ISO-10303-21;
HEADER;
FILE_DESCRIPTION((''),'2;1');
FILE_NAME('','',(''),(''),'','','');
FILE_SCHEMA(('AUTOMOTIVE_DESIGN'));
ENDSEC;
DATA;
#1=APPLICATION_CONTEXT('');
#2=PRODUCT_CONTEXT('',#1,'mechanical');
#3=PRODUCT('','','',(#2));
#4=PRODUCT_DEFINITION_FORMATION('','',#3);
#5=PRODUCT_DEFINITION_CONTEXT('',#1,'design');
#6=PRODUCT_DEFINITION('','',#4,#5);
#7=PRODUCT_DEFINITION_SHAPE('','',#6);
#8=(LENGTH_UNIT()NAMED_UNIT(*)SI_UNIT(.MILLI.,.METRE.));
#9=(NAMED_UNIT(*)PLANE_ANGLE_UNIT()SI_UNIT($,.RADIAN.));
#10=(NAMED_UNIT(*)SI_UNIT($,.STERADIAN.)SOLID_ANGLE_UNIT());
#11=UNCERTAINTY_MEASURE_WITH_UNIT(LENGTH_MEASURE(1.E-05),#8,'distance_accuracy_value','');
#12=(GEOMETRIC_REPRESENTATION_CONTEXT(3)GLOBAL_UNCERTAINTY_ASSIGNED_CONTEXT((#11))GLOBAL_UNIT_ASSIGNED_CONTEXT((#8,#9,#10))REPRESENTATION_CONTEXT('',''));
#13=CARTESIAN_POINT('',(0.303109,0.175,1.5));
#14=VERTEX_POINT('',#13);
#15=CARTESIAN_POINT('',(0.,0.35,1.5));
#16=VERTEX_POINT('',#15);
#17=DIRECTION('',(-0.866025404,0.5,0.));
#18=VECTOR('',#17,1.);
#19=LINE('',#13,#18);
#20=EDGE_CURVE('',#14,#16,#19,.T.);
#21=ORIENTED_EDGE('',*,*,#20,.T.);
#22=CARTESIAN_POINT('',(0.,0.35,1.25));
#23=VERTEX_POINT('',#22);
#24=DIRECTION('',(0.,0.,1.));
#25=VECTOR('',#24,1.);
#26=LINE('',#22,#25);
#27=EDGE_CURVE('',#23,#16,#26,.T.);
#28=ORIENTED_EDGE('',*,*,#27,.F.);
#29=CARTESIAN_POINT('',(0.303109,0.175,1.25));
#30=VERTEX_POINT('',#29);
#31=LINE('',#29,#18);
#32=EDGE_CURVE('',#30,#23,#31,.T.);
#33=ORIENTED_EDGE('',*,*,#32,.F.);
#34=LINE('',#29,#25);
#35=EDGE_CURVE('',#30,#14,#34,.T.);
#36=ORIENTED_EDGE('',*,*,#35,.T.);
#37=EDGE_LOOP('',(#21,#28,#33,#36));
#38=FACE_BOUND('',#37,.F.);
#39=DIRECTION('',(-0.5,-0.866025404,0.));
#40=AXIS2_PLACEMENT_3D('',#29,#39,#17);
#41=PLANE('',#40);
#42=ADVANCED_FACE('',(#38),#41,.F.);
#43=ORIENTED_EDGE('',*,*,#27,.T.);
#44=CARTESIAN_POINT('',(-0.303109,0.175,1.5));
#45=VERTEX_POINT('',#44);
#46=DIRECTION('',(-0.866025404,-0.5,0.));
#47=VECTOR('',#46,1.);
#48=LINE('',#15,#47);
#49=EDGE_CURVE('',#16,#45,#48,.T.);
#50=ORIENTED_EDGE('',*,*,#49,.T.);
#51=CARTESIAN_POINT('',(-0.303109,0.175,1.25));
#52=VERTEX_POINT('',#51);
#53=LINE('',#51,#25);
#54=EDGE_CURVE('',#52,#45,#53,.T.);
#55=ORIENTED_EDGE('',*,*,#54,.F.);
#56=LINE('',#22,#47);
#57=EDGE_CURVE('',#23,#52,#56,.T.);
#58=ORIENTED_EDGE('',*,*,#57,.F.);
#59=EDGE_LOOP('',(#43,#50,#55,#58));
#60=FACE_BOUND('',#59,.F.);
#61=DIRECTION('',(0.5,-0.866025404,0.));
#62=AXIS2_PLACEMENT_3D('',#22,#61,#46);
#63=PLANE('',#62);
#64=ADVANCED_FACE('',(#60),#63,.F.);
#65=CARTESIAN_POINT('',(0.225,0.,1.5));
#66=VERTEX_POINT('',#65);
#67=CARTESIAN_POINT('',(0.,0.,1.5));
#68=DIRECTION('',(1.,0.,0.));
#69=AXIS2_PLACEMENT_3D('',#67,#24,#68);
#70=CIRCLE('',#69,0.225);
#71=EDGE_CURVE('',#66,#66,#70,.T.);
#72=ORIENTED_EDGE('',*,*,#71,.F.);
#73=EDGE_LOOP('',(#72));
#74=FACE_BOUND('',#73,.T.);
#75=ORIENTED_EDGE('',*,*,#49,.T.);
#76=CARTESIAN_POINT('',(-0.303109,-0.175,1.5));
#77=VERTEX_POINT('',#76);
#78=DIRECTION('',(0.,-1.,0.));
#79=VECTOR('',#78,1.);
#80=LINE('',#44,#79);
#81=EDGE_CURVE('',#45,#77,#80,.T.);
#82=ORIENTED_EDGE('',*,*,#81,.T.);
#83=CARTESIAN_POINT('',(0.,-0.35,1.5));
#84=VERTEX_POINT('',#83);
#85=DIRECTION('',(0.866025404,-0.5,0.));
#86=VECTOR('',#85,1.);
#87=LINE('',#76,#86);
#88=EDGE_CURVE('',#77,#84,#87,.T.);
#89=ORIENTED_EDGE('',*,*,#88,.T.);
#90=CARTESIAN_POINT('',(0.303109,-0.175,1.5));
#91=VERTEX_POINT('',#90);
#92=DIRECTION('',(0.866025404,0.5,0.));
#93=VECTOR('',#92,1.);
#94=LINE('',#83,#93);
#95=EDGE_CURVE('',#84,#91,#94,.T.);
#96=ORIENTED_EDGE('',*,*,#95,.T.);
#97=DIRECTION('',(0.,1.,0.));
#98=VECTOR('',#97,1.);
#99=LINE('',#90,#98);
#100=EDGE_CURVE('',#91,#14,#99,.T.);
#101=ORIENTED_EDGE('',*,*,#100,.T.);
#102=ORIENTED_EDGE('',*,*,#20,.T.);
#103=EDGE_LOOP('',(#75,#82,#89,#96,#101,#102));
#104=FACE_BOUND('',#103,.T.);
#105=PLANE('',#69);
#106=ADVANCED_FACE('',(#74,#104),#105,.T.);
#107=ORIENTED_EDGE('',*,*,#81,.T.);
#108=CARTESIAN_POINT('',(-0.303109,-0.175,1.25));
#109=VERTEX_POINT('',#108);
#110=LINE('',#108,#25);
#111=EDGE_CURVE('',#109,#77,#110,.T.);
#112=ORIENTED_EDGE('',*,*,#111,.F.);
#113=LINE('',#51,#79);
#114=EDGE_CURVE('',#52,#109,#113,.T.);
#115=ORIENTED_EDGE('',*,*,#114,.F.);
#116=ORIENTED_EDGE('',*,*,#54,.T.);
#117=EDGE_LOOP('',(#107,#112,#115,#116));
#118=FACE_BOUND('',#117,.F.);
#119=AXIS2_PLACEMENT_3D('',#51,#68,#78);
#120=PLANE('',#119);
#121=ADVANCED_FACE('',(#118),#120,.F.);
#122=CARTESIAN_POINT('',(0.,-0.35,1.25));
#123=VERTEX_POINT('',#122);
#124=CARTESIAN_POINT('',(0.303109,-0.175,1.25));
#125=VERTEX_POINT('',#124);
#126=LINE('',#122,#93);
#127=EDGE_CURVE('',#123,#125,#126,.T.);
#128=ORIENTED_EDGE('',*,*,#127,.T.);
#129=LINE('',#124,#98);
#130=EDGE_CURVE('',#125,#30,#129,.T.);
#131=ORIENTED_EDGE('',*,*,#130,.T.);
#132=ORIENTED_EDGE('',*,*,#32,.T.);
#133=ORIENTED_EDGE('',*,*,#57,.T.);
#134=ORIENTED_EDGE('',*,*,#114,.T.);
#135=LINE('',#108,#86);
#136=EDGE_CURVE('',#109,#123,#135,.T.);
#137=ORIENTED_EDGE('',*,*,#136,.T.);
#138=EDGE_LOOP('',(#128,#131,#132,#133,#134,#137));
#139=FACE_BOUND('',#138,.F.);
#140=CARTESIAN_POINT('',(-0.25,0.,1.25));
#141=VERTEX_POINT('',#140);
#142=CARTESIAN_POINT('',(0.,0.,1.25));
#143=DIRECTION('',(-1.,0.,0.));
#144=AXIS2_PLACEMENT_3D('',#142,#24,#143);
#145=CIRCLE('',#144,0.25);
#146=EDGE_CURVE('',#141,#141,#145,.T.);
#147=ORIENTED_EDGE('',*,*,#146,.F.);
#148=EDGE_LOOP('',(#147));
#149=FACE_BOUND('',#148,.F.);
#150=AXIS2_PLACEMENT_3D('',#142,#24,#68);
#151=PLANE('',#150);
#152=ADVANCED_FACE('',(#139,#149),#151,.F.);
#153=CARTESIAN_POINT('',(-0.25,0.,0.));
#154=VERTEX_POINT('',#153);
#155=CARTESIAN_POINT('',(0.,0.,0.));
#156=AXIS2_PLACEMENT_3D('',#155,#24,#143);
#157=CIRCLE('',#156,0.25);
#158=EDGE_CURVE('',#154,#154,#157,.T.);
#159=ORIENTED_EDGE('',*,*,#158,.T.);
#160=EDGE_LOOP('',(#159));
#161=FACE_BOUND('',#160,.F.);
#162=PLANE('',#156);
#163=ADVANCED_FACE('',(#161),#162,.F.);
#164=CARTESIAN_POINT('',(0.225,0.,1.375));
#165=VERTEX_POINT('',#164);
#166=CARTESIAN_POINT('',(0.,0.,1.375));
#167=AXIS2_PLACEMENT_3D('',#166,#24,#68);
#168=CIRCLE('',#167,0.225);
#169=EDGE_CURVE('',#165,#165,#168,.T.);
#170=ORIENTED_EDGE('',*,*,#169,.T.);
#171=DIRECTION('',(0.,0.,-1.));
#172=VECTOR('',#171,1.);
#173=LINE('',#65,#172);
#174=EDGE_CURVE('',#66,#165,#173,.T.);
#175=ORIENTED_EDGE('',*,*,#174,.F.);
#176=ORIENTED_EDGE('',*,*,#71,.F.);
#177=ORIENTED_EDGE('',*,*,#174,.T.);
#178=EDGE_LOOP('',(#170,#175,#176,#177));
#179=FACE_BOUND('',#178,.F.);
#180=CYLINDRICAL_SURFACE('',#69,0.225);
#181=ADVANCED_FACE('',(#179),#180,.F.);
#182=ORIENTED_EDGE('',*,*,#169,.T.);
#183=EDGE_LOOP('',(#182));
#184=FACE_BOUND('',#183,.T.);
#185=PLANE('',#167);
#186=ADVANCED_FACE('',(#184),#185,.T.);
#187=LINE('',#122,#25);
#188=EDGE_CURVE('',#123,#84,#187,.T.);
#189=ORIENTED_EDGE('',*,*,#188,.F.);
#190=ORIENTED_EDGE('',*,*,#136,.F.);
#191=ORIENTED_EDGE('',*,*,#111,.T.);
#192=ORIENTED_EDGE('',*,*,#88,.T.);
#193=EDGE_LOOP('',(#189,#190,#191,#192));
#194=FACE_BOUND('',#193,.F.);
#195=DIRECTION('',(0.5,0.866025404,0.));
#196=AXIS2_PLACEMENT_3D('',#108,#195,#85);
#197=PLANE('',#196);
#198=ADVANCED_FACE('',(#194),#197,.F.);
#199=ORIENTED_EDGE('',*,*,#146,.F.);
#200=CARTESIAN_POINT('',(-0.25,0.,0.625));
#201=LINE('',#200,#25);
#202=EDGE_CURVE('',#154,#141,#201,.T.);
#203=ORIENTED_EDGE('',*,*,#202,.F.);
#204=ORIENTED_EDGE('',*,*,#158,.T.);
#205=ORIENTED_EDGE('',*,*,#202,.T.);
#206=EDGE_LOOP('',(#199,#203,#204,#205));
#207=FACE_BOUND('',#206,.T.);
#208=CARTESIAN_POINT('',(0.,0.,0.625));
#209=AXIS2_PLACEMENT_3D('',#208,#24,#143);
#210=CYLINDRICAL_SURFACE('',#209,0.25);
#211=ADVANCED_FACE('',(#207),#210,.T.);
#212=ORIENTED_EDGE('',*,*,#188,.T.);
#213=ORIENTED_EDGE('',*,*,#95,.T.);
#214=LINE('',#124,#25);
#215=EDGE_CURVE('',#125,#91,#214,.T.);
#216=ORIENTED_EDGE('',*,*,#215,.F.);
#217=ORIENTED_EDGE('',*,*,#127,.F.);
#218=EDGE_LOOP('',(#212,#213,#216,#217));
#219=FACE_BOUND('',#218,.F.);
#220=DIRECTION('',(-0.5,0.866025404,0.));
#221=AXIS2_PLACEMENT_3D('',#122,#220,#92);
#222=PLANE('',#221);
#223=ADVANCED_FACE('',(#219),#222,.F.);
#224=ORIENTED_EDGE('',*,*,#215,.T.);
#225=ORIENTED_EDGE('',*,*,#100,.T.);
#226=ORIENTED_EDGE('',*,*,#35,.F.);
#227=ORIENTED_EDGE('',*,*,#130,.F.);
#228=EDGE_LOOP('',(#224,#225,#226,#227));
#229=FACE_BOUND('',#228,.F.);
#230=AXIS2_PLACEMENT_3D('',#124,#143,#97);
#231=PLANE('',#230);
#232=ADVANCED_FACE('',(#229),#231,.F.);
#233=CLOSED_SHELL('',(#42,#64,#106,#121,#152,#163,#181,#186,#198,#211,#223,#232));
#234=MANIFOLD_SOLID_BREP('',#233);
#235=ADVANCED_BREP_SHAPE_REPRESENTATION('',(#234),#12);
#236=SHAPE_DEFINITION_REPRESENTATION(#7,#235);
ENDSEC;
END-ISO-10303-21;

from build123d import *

# Parameters (mm, degrees)
F0_W     = 0.25
F0_H     = 1.25
F2_R     = 0.25
F3_DEPTH = 0.25
F4_R     = 0.225
F5_DEPTH = 0.125


with BuildPart() as f1:
    # F0 (on Front) → F1 (revolve)
    with BuildSketch(Plane.XZ):
        with Locations((-0.125, 0.625)):
            Rectangle(F0_W, F0_H)
    revolve(axis=Axis((0, 0, 0.625), (0, 0, 1)))

    # F2 (on face) → F3 (join)
    with BuildSketch(Plane.XY.offset(1.25)):
        Polygon((0.3031088913, 0.175), (0, 0.35), (-0.3031088913, 0.175), (-0.3031088913, -0.175), (0, -0.35), (0.3031088913, -0.175), align=None)
        Circle(F2_R, mode=Mode.SUBTRACT)
        Circle(F2_R)
    extrude(amount=F3_DEPTH)

    # F4 (on face) → F5 (cut)
    with BuildSketch(Plane.XY.offset(1.5)):
        Circle(F4_R)
    extrude(amount=-F5_DEPTH, mode=Mode.SUBTRACT)


solid = f1.part
